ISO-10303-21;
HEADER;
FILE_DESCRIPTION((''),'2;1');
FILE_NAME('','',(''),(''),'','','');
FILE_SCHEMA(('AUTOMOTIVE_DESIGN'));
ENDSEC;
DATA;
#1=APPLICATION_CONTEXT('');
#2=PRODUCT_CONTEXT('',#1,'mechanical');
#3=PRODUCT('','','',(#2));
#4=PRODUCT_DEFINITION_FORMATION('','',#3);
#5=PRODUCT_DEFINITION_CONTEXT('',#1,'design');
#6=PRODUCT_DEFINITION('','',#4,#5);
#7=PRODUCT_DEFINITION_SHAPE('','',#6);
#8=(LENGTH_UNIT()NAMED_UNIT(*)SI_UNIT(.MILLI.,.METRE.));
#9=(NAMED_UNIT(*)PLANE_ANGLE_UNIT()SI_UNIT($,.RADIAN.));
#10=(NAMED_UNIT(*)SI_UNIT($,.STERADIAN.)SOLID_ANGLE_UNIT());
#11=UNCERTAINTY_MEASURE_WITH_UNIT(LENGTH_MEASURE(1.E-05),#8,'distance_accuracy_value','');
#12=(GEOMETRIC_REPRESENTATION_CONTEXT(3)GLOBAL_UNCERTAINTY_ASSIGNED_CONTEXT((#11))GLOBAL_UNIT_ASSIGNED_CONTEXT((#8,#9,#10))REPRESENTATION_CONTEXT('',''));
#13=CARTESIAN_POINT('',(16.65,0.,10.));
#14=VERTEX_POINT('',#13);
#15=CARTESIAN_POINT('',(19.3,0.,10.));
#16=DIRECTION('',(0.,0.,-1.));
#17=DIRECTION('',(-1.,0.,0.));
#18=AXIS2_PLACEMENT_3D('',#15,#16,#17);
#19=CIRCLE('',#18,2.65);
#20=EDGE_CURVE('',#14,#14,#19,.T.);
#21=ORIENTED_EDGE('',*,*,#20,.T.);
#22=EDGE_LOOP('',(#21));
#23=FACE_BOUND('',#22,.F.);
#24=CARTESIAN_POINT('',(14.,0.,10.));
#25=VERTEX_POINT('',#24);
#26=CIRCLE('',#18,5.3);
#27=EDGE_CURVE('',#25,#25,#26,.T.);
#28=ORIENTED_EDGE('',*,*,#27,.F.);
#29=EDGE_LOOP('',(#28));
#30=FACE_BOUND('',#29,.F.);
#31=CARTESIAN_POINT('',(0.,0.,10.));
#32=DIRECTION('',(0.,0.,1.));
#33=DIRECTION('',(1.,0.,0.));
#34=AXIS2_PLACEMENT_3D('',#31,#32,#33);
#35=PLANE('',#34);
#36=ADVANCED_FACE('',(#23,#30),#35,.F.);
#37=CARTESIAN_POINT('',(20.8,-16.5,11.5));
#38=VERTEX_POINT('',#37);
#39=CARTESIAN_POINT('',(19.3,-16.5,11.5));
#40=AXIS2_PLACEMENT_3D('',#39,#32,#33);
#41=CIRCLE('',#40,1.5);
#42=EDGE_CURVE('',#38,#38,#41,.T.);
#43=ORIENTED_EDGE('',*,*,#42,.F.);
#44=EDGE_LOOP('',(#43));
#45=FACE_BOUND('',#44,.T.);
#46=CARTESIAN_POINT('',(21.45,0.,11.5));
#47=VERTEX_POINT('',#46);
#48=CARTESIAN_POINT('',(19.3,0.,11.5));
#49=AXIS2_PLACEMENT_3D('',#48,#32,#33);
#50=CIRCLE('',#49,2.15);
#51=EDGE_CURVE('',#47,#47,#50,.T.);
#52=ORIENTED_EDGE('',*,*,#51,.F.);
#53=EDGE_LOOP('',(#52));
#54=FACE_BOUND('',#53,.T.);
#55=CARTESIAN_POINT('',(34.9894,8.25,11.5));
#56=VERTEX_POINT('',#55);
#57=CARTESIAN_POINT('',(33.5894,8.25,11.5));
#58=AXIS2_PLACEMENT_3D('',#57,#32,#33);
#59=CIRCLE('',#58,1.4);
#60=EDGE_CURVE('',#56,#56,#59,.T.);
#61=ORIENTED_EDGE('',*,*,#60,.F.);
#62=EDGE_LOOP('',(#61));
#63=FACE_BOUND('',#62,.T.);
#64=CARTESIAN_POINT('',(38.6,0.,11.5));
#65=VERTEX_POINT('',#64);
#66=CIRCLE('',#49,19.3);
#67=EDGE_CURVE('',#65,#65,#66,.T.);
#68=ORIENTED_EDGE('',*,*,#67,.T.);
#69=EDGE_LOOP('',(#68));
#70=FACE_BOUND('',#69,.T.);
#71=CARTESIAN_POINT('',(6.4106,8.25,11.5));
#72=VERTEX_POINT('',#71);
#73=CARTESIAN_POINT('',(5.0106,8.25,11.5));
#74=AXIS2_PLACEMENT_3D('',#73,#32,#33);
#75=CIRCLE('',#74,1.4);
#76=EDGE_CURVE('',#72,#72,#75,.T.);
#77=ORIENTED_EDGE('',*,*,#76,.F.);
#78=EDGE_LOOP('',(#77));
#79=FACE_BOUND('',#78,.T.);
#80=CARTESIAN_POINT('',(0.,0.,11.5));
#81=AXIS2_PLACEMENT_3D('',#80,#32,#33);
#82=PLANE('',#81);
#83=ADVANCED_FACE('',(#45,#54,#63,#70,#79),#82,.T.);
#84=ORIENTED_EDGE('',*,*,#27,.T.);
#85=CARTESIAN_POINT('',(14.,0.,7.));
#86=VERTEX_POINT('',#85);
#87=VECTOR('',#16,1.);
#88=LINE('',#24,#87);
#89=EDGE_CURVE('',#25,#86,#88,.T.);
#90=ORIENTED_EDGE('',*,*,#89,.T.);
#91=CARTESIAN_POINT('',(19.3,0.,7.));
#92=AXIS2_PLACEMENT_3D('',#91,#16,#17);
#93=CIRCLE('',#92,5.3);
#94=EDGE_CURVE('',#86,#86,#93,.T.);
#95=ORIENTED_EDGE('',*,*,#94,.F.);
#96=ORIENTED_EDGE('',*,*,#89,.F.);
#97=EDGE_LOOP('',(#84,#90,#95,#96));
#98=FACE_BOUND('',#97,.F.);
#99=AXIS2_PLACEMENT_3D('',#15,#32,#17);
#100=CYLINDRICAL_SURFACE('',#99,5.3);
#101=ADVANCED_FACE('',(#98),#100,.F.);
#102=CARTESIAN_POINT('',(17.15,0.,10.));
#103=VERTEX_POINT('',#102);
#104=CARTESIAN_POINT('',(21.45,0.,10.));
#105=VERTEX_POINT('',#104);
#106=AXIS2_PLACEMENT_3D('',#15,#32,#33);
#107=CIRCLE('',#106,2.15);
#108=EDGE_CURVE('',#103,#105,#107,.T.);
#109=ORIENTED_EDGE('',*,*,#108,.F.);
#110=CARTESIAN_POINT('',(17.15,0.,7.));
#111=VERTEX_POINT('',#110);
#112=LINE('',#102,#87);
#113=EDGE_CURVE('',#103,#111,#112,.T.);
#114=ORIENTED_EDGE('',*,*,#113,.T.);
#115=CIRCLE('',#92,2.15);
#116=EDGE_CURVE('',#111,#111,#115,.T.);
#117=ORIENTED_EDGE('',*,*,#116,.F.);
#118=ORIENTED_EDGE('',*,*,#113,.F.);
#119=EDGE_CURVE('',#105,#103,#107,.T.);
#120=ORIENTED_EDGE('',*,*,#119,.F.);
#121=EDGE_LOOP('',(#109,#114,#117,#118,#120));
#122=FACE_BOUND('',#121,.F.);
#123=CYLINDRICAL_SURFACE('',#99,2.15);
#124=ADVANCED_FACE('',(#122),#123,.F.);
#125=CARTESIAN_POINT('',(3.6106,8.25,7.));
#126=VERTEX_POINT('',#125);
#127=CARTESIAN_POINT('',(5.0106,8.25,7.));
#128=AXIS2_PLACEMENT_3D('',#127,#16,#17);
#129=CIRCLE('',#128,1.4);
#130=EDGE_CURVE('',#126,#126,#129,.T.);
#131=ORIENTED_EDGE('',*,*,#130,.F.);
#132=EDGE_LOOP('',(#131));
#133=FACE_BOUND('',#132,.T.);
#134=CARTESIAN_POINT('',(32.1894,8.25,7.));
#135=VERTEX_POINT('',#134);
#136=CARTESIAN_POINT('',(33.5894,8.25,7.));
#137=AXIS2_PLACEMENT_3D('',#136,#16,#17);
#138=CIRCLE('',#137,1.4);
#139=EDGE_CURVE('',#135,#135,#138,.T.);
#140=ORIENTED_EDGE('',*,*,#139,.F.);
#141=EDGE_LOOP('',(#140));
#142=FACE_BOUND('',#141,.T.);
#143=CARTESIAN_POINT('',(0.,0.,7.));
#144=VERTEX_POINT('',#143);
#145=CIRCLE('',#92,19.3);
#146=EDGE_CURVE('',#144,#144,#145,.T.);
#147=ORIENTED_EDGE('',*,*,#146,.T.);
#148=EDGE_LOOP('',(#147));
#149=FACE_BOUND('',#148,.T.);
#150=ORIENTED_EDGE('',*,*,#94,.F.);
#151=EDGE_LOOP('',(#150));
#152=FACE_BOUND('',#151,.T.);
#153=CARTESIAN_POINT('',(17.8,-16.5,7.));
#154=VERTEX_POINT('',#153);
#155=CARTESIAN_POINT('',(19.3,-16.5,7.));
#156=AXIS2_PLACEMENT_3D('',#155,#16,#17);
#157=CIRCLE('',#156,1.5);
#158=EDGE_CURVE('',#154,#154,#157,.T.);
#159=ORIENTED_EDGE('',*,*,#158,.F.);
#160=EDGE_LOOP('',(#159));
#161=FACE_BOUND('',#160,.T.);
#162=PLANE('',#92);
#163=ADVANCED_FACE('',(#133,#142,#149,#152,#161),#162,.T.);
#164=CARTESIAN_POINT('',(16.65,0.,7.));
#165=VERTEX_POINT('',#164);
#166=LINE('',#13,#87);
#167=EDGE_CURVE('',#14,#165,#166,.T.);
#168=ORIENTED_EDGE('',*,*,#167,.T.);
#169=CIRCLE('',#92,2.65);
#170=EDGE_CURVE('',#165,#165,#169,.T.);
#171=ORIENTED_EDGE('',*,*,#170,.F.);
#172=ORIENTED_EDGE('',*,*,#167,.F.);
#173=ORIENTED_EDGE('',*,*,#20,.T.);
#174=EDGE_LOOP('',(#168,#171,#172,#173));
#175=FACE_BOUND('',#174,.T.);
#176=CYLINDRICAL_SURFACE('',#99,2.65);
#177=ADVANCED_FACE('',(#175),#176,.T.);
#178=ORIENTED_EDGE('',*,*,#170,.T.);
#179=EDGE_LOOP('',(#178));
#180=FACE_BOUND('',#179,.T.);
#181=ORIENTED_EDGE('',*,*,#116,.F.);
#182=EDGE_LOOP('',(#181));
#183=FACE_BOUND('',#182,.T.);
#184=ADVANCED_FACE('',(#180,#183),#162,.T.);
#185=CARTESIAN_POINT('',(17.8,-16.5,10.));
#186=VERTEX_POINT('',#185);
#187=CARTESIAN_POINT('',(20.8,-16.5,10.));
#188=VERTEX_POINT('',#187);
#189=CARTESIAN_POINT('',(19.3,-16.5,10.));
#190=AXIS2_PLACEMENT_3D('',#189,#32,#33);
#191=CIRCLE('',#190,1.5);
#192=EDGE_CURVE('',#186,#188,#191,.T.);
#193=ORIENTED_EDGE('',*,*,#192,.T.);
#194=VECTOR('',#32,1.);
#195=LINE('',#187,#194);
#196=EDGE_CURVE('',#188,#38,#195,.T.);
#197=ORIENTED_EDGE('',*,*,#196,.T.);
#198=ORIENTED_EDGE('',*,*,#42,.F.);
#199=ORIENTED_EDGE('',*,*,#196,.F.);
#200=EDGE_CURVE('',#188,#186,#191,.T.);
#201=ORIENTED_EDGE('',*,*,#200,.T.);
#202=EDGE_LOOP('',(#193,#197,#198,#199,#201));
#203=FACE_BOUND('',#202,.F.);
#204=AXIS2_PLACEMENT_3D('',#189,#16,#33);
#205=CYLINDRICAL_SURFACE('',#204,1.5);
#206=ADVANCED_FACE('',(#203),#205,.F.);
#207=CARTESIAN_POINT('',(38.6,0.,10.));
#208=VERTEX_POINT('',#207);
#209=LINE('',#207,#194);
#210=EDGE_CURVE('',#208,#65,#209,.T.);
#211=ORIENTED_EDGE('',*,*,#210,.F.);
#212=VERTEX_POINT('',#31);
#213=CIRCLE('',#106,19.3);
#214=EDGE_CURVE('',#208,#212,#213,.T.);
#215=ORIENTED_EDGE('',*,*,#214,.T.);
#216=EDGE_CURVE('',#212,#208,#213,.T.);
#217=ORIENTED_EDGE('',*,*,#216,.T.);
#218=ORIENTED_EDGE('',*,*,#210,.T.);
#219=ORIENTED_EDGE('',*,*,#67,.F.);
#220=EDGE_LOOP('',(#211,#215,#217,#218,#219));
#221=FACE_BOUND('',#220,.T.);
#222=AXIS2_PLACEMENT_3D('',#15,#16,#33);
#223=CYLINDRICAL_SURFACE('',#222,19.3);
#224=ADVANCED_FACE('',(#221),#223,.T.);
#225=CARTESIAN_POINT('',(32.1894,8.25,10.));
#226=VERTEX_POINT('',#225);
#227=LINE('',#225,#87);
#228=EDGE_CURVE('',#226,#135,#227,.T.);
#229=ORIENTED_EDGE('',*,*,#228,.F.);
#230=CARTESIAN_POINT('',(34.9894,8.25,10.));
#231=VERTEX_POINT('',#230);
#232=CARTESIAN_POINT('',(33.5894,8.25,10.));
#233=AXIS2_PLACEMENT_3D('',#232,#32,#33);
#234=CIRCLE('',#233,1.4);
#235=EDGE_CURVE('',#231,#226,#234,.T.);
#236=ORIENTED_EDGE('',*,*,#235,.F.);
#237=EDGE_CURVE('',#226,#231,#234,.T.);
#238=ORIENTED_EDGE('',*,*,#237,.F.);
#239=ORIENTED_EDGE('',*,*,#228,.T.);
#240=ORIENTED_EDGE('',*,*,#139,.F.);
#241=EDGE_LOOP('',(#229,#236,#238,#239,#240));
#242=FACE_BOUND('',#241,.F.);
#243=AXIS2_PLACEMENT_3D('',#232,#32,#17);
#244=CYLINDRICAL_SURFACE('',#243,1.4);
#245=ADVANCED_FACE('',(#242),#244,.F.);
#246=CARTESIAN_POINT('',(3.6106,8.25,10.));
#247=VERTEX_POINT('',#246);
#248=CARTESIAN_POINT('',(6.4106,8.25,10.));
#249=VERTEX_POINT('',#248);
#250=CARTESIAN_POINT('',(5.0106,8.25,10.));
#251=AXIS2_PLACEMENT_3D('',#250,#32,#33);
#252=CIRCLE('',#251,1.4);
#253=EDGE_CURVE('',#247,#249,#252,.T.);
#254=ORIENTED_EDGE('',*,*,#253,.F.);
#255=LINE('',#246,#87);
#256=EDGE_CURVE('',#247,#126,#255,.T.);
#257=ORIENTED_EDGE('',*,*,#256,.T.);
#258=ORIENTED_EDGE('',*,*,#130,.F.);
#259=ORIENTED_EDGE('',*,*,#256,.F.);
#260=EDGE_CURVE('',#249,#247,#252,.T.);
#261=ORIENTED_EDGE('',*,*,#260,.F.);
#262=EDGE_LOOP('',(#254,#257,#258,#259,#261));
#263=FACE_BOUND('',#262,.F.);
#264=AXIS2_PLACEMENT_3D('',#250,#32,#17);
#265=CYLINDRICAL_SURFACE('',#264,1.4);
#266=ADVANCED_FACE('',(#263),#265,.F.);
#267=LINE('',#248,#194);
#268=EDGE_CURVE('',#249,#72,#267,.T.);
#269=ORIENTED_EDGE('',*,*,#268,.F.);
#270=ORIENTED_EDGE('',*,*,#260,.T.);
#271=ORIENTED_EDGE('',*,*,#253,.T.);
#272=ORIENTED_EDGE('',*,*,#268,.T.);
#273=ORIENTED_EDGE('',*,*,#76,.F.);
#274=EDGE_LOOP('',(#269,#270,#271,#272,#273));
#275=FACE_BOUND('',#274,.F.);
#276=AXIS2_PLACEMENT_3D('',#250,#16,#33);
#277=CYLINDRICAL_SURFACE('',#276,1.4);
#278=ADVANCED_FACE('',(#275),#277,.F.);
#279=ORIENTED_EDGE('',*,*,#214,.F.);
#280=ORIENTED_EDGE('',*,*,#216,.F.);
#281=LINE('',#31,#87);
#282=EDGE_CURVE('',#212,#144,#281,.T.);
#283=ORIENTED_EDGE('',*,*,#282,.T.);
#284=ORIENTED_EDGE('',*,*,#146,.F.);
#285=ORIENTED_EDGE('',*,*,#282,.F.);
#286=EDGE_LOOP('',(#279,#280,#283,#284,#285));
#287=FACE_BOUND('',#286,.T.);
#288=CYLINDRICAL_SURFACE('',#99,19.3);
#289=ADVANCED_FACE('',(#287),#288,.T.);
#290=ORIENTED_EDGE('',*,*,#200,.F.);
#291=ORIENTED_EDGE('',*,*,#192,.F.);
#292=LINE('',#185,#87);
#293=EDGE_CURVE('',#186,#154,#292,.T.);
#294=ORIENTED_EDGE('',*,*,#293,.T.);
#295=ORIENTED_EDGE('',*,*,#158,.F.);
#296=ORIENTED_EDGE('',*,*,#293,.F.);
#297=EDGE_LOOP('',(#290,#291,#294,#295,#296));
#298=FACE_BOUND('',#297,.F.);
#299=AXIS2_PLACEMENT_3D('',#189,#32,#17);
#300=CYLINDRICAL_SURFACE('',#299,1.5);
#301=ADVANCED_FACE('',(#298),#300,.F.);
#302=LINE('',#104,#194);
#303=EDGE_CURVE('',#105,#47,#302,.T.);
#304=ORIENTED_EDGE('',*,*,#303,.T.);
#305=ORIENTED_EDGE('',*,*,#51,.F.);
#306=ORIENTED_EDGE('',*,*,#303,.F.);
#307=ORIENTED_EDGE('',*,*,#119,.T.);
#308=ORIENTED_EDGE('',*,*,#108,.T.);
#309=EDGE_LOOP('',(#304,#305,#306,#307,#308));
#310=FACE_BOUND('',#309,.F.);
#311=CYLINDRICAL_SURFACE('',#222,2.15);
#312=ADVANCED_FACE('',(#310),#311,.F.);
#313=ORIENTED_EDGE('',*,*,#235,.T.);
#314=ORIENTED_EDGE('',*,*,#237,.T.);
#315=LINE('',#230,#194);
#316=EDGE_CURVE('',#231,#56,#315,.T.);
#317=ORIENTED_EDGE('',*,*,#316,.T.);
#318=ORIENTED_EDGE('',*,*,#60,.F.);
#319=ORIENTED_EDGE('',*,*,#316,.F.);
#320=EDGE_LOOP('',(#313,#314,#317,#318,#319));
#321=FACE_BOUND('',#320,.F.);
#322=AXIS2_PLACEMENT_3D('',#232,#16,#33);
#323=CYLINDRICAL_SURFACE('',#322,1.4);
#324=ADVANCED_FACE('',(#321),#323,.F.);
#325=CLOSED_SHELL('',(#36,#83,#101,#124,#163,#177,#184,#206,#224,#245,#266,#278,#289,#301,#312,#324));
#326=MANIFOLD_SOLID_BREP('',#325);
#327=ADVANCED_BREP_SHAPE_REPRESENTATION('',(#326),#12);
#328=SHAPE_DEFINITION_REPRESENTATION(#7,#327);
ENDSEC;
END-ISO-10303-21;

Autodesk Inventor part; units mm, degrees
ref_plane "YZ Plane" through (0, 0, 0) normal (1, 0, 0) x (0, 1, 0)
ref_plane "XY Plane" through (0, 0, 0) normal (0, 0, 1) x (1, 0, 0)
ref_plane "Arbeitsebene1" through (0, 0, 10) normal (0, 0, 1) x (1, 0, 0)
sketch "Skizze1" plane through (0, 0, 10) normal (0, 0, 1) x (1, 0, 0)
  circle A0 centre (19.3, 0) radius 19.3 projected
  circle A1 centre (5.0106, 8.25) radius 1.4 projected
  circle A2 centre (33.5894, 8.25) radius 1.4 projected
  circle A3 centre (19.3, -16.5) radius 1.5 projected
  circle A4 centre (19.3, 0) radius 2.15
  point P0 (0, 0)
  dimension "d0" = 4.3
extrude "Extrusion1" add sketch "Skizze1" along normal blind 1.5
sketch "Skizze2" plane through (19.3, 0, 10) normal (0, 0, -1) x (-1, 0, 0)
  circle A0 centre (0, 0) radius 2.15 projected
  circle A1 centre (0, 0) radius 5.3
  circle A2 centre (0, 0) radius 19.3 projected
  circle A3 centre (0, 0) radius 2.15 projected
  circle A4 centre (0, -16.5) radius 1.5 projected
  circle A5 centre (-14.2894, 8.25) radius 1.4 projected
  circle A6 centre (14.2894, 8.25) radius 1.4 projected
  circle A7 centre (0, 0) radius 5.8
  circle A8 centre (0, 0) radius 8
  circle A9 centre (0, 0) radius 2.65
  point P0 (19.3, 0)
  dimension "d6" = 10.6
  dimension "d7" = 0.5
  dimension "d8" = 16
  dimension "d13" = 0.5
extrude "Extrusion2" add sketch "Skizze2" along normal blind 3 contours A2 | A7 | A8 | A9
sketch "Skizze3" plane through (0, 0, 0) normal (0, 1, 0) x (-1, 0, 0)
  point P0 (0, 0)
ref_plane "Arbeitsebene2" through (0, 5, 0) normal (0, 1, 0) x (-1, 0, 0)
properties part number "50_ETL_Top_Seal_v1"
